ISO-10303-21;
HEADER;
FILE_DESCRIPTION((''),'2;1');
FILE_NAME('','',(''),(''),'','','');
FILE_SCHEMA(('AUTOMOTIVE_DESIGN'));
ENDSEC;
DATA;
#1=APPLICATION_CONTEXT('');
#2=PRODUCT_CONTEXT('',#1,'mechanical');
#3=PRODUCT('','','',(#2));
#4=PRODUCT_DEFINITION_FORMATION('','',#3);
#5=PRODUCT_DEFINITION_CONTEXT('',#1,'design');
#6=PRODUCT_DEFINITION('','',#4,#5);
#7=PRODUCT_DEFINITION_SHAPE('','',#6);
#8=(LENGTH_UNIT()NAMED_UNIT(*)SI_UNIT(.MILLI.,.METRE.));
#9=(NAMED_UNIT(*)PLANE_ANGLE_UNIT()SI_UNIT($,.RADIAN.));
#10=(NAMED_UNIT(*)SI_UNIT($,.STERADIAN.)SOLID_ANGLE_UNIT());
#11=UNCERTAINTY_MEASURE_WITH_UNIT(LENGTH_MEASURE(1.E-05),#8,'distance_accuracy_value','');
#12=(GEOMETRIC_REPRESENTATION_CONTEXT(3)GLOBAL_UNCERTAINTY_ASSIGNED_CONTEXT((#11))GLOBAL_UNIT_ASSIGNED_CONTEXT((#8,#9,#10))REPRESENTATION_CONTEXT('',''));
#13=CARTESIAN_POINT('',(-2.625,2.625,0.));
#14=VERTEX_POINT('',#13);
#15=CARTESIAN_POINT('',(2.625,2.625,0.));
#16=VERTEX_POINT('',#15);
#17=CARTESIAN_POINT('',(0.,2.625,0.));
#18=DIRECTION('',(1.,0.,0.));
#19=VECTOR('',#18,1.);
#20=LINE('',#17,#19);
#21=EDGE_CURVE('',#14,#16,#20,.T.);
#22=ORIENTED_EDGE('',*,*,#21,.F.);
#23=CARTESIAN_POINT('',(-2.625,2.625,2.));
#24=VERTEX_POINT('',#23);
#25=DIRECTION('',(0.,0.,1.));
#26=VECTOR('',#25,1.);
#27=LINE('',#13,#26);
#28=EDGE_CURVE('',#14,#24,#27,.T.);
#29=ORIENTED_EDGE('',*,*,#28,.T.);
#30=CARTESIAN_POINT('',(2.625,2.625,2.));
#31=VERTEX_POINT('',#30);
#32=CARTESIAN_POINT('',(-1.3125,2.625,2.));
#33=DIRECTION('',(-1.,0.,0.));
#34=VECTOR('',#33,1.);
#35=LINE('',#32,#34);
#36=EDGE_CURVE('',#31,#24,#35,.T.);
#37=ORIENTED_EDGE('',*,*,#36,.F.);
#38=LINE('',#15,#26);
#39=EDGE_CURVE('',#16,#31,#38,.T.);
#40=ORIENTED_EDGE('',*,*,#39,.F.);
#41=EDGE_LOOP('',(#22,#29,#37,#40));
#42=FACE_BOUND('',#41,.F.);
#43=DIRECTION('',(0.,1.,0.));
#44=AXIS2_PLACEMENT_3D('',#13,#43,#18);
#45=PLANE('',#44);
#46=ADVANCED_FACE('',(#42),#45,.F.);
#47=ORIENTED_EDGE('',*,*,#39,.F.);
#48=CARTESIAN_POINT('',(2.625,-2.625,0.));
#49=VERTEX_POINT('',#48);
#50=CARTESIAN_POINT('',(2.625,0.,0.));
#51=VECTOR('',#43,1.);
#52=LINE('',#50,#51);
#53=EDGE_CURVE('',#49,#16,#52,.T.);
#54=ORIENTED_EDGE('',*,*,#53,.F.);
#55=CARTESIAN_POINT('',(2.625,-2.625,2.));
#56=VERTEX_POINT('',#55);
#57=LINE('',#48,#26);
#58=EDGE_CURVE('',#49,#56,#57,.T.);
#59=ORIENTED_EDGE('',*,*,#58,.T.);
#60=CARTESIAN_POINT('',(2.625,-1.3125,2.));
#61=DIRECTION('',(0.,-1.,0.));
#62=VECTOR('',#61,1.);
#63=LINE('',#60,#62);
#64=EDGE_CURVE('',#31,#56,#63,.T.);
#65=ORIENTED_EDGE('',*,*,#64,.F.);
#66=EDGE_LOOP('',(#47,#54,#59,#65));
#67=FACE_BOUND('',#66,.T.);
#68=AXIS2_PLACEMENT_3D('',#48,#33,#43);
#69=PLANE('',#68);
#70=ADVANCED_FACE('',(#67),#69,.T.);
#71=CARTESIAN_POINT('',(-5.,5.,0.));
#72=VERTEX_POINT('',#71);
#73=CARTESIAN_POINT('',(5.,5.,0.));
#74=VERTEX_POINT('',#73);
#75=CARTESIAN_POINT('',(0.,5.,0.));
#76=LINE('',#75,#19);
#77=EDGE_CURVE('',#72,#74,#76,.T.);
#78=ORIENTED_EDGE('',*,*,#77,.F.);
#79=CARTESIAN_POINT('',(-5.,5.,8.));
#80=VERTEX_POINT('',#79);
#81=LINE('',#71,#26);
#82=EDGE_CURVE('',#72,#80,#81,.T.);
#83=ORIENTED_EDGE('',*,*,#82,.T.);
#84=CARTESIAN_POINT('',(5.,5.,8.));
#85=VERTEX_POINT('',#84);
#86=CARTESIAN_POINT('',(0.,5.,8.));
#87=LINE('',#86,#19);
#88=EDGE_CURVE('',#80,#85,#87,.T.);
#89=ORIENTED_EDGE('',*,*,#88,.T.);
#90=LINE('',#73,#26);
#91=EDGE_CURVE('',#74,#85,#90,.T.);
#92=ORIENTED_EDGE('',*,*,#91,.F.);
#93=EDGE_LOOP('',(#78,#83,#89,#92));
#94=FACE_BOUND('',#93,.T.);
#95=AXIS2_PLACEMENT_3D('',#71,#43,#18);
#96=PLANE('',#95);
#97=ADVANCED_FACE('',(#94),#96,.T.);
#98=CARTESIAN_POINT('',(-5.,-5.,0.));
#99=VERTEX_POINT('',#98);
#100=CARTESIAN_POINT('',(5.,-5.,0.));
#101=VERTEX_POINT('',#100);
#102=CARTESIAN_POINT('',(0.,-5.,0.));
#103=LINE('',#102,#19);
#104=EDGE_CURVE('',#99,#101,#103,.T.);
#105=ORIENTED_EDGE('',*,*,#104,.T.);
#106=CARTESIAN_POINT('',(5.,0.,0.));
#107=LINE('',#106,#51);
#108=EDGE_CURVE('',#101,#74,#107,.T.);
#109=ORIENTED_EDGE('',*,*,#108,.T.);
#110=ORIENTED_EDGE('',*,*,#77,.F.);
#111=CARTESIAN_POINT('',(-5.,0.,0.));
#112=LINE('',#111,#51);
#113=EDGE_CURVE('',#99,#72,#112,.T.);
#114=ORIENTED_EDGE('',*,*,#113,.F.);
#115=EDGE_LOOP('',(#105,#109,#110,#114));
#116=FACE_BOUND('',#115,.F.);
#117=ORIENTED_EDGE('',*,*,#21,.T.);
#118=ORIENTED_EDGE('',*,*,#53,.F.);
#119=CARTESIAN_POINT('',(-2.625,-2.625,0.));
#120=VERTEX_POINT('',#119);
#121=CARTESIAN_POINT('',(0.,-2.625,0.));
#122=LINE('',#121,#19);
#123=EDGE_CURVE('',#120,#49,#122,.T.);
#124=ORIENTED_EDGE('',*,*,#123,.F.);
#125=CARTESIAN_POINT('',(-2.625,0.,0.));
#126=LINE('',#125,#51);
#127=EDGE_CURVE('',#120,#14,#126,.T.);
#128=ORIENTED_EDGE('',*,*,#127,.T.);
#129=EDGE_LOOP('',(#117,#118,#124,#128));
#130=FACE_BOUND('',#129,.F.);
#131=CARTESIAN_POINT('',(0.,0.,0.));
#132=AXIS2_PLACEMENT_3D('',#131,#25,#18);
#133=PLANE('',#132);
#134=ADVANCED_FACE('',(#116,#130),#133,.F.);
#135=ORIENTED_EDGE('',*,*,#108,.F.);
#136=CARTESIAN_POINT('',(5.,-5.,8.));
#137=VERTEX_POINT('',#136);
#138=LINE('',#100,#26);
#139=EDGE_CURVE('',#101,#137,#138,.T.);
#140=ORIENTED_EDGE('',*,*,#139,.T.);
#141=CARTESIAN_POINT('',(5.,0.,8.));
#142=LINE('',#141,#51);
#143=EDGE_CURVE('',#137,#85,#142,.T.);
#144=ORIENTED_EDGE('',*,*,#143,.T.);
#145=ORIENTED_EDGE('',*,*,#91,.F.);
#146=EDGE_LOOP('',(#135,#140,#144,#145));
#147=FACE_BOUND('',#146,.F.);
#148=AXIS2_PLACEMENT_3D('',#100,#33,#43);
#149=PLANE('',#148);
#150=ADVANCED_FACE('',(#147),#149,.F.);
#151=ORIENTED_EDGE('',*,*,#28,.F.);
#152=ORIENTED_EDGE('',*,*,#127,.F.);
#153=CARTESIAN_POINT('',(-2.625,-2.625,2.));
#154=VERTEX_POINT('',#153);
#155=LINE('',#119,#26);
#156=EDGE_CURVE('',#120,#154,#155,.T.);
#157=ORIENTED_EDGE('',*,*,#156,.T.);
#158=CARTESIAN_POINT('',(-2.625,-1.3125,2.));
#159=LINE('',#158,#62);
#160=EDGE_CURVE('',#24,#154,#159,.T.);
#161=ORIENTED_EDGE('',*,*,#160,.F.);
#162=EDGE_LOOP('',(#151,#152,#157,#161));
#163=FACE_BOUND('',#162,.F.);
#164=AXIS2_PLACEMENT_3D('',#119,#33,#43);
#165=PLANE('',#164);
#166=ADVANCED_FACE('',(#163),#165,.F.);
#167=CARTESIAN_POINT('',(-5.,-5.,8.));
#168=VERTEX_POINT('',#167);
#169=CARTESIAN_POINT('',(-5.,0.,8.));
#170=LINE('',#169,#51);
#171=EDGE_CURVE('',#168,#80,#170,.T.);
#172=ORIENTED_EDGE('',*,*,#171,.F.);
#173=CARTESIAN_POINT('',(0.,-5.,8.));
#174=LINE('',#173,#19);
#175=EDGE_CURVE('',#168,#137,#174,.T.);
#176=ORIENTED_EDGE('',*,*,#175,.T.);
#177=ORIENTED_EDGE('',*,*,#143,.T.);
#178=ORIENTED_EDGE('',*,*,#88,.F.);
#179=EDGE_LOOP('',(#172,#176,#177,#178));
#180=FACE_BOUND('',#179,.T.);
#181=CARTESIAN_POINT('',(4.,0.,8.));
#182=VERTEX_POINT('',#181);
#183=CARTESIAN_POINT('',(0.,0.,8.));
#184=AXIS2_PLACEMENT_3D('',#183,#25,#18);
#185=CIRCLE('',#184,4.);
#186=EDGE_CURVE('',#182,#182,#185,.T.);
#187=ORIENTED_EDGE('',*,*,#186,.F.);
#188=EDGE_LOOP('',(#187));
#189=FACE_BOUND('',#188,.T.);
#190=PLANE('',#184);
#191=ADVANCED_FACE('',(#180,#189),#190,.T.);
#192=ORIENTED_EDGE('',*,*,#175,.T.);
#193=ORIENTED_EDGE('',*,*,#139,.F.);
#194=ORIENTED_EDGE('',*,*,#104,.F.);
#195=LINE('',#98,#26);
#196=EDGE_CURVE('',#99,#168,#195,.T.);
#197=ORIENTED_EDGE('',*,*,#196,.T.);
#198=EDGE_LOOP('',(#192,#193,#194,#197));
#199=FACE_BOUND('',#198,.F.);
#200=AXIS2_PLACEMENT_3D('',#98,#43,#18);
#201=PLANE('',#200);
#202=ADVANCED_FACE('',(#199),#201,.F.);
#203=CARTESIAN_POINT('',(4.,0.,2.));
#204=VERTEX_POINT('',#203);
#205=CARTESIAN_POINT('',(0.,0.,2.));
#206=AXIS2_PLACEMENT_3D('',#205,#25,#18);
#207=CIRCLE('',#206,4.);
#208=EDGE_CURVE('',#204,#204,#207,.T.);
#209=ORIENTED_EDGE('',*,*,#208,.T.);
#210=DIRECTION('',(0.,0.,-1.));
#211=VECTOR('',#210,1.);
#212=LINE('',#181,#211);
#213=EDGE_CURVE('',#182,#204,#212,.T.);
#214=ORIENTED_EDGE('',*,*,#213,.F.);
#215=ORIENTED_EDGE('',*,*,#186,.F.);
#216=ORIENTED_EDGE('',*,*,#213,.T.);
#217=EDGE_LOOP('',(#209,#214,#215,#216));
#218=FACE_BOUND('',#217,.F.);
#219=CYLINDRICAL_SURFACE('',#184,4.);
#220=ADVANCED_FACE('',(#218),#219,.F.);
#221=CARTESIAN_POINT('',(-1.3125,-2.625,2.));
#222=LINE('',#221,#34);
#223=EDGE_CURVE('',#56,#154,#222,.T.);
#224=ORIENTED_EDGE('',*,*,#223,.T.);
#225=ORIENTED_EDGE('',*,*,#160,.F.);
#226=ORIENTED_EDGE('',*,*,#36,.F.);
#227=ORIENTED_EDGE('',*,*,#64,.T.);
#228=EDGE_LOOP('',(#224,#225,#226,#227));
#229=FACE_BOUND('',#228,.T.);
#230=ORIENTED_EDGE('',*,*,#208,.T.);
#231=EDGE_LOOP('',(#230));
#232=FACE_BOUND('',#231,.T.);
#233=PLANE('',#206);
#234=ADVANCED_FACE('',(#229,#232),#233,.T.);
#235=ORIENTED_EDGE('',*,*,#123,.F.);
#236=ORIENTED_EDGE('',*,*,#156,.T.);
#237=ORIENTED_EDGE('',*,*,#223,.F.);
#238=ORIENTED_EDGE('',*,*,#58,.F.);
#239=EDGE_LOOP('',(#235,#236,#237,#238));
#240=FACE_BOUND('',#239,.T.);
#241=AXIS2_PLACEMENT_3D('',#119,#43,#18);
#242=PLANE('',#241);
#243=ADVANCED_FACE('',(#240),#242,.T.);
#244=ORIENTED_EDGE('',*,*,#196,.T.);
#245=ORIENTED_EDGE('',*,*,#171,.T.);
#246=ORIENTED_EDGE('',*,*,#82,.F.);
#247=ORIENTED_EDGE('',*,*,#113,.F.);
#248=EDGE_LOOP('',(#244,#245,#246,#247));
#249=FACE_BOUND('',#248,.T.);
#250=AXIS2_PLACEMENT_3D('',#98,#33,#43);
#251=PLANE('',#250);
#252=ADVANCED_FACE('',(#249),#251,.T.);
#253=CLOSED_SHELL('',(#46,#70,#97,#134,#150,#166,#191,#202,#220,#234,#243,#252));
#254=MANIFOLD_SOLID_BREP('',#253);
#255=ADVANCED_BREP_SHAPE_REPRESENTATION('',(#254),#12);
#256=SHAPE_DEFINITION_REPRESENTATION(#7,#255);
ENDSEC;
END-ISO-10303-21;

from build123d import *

# Parameters (mm, degrees)
F0_W     = 10
F0_H     = 10
F1_DEPTH = 8
F2_R     = 4
F3_DEPTH = 6
F4_W     = 5.25
F4_H     = 5.25
F5_DEPTH = 3


# Not quite as in the source:
# - a feature names something its author has since deleted; it is built from what else it names


with BuildPart() as f1:
    # F0 (on Top) → F1 (new body)
    with BuildSketch(Plane.XY):
        Rectangle(F0_W, F0_H)
    extrude(amount=F1_DEPTH)

    # F2 (on face) → F3 (cut)
    with BuildSketch(Plane.XY.offset(8)):
        Circle(F2_R)
    extrude(amount=-F3_DEPTH, mode=Mode.SUBTRACT)

    # F4 (on face) → F5 (cut)
    with BuildSketch(Plane.XY):
        Rectangle(F4_W, F4_H)
    extrude(amount=F5_DEPTH, mode=Mode.SUBTRACT)


solid = f1.part
